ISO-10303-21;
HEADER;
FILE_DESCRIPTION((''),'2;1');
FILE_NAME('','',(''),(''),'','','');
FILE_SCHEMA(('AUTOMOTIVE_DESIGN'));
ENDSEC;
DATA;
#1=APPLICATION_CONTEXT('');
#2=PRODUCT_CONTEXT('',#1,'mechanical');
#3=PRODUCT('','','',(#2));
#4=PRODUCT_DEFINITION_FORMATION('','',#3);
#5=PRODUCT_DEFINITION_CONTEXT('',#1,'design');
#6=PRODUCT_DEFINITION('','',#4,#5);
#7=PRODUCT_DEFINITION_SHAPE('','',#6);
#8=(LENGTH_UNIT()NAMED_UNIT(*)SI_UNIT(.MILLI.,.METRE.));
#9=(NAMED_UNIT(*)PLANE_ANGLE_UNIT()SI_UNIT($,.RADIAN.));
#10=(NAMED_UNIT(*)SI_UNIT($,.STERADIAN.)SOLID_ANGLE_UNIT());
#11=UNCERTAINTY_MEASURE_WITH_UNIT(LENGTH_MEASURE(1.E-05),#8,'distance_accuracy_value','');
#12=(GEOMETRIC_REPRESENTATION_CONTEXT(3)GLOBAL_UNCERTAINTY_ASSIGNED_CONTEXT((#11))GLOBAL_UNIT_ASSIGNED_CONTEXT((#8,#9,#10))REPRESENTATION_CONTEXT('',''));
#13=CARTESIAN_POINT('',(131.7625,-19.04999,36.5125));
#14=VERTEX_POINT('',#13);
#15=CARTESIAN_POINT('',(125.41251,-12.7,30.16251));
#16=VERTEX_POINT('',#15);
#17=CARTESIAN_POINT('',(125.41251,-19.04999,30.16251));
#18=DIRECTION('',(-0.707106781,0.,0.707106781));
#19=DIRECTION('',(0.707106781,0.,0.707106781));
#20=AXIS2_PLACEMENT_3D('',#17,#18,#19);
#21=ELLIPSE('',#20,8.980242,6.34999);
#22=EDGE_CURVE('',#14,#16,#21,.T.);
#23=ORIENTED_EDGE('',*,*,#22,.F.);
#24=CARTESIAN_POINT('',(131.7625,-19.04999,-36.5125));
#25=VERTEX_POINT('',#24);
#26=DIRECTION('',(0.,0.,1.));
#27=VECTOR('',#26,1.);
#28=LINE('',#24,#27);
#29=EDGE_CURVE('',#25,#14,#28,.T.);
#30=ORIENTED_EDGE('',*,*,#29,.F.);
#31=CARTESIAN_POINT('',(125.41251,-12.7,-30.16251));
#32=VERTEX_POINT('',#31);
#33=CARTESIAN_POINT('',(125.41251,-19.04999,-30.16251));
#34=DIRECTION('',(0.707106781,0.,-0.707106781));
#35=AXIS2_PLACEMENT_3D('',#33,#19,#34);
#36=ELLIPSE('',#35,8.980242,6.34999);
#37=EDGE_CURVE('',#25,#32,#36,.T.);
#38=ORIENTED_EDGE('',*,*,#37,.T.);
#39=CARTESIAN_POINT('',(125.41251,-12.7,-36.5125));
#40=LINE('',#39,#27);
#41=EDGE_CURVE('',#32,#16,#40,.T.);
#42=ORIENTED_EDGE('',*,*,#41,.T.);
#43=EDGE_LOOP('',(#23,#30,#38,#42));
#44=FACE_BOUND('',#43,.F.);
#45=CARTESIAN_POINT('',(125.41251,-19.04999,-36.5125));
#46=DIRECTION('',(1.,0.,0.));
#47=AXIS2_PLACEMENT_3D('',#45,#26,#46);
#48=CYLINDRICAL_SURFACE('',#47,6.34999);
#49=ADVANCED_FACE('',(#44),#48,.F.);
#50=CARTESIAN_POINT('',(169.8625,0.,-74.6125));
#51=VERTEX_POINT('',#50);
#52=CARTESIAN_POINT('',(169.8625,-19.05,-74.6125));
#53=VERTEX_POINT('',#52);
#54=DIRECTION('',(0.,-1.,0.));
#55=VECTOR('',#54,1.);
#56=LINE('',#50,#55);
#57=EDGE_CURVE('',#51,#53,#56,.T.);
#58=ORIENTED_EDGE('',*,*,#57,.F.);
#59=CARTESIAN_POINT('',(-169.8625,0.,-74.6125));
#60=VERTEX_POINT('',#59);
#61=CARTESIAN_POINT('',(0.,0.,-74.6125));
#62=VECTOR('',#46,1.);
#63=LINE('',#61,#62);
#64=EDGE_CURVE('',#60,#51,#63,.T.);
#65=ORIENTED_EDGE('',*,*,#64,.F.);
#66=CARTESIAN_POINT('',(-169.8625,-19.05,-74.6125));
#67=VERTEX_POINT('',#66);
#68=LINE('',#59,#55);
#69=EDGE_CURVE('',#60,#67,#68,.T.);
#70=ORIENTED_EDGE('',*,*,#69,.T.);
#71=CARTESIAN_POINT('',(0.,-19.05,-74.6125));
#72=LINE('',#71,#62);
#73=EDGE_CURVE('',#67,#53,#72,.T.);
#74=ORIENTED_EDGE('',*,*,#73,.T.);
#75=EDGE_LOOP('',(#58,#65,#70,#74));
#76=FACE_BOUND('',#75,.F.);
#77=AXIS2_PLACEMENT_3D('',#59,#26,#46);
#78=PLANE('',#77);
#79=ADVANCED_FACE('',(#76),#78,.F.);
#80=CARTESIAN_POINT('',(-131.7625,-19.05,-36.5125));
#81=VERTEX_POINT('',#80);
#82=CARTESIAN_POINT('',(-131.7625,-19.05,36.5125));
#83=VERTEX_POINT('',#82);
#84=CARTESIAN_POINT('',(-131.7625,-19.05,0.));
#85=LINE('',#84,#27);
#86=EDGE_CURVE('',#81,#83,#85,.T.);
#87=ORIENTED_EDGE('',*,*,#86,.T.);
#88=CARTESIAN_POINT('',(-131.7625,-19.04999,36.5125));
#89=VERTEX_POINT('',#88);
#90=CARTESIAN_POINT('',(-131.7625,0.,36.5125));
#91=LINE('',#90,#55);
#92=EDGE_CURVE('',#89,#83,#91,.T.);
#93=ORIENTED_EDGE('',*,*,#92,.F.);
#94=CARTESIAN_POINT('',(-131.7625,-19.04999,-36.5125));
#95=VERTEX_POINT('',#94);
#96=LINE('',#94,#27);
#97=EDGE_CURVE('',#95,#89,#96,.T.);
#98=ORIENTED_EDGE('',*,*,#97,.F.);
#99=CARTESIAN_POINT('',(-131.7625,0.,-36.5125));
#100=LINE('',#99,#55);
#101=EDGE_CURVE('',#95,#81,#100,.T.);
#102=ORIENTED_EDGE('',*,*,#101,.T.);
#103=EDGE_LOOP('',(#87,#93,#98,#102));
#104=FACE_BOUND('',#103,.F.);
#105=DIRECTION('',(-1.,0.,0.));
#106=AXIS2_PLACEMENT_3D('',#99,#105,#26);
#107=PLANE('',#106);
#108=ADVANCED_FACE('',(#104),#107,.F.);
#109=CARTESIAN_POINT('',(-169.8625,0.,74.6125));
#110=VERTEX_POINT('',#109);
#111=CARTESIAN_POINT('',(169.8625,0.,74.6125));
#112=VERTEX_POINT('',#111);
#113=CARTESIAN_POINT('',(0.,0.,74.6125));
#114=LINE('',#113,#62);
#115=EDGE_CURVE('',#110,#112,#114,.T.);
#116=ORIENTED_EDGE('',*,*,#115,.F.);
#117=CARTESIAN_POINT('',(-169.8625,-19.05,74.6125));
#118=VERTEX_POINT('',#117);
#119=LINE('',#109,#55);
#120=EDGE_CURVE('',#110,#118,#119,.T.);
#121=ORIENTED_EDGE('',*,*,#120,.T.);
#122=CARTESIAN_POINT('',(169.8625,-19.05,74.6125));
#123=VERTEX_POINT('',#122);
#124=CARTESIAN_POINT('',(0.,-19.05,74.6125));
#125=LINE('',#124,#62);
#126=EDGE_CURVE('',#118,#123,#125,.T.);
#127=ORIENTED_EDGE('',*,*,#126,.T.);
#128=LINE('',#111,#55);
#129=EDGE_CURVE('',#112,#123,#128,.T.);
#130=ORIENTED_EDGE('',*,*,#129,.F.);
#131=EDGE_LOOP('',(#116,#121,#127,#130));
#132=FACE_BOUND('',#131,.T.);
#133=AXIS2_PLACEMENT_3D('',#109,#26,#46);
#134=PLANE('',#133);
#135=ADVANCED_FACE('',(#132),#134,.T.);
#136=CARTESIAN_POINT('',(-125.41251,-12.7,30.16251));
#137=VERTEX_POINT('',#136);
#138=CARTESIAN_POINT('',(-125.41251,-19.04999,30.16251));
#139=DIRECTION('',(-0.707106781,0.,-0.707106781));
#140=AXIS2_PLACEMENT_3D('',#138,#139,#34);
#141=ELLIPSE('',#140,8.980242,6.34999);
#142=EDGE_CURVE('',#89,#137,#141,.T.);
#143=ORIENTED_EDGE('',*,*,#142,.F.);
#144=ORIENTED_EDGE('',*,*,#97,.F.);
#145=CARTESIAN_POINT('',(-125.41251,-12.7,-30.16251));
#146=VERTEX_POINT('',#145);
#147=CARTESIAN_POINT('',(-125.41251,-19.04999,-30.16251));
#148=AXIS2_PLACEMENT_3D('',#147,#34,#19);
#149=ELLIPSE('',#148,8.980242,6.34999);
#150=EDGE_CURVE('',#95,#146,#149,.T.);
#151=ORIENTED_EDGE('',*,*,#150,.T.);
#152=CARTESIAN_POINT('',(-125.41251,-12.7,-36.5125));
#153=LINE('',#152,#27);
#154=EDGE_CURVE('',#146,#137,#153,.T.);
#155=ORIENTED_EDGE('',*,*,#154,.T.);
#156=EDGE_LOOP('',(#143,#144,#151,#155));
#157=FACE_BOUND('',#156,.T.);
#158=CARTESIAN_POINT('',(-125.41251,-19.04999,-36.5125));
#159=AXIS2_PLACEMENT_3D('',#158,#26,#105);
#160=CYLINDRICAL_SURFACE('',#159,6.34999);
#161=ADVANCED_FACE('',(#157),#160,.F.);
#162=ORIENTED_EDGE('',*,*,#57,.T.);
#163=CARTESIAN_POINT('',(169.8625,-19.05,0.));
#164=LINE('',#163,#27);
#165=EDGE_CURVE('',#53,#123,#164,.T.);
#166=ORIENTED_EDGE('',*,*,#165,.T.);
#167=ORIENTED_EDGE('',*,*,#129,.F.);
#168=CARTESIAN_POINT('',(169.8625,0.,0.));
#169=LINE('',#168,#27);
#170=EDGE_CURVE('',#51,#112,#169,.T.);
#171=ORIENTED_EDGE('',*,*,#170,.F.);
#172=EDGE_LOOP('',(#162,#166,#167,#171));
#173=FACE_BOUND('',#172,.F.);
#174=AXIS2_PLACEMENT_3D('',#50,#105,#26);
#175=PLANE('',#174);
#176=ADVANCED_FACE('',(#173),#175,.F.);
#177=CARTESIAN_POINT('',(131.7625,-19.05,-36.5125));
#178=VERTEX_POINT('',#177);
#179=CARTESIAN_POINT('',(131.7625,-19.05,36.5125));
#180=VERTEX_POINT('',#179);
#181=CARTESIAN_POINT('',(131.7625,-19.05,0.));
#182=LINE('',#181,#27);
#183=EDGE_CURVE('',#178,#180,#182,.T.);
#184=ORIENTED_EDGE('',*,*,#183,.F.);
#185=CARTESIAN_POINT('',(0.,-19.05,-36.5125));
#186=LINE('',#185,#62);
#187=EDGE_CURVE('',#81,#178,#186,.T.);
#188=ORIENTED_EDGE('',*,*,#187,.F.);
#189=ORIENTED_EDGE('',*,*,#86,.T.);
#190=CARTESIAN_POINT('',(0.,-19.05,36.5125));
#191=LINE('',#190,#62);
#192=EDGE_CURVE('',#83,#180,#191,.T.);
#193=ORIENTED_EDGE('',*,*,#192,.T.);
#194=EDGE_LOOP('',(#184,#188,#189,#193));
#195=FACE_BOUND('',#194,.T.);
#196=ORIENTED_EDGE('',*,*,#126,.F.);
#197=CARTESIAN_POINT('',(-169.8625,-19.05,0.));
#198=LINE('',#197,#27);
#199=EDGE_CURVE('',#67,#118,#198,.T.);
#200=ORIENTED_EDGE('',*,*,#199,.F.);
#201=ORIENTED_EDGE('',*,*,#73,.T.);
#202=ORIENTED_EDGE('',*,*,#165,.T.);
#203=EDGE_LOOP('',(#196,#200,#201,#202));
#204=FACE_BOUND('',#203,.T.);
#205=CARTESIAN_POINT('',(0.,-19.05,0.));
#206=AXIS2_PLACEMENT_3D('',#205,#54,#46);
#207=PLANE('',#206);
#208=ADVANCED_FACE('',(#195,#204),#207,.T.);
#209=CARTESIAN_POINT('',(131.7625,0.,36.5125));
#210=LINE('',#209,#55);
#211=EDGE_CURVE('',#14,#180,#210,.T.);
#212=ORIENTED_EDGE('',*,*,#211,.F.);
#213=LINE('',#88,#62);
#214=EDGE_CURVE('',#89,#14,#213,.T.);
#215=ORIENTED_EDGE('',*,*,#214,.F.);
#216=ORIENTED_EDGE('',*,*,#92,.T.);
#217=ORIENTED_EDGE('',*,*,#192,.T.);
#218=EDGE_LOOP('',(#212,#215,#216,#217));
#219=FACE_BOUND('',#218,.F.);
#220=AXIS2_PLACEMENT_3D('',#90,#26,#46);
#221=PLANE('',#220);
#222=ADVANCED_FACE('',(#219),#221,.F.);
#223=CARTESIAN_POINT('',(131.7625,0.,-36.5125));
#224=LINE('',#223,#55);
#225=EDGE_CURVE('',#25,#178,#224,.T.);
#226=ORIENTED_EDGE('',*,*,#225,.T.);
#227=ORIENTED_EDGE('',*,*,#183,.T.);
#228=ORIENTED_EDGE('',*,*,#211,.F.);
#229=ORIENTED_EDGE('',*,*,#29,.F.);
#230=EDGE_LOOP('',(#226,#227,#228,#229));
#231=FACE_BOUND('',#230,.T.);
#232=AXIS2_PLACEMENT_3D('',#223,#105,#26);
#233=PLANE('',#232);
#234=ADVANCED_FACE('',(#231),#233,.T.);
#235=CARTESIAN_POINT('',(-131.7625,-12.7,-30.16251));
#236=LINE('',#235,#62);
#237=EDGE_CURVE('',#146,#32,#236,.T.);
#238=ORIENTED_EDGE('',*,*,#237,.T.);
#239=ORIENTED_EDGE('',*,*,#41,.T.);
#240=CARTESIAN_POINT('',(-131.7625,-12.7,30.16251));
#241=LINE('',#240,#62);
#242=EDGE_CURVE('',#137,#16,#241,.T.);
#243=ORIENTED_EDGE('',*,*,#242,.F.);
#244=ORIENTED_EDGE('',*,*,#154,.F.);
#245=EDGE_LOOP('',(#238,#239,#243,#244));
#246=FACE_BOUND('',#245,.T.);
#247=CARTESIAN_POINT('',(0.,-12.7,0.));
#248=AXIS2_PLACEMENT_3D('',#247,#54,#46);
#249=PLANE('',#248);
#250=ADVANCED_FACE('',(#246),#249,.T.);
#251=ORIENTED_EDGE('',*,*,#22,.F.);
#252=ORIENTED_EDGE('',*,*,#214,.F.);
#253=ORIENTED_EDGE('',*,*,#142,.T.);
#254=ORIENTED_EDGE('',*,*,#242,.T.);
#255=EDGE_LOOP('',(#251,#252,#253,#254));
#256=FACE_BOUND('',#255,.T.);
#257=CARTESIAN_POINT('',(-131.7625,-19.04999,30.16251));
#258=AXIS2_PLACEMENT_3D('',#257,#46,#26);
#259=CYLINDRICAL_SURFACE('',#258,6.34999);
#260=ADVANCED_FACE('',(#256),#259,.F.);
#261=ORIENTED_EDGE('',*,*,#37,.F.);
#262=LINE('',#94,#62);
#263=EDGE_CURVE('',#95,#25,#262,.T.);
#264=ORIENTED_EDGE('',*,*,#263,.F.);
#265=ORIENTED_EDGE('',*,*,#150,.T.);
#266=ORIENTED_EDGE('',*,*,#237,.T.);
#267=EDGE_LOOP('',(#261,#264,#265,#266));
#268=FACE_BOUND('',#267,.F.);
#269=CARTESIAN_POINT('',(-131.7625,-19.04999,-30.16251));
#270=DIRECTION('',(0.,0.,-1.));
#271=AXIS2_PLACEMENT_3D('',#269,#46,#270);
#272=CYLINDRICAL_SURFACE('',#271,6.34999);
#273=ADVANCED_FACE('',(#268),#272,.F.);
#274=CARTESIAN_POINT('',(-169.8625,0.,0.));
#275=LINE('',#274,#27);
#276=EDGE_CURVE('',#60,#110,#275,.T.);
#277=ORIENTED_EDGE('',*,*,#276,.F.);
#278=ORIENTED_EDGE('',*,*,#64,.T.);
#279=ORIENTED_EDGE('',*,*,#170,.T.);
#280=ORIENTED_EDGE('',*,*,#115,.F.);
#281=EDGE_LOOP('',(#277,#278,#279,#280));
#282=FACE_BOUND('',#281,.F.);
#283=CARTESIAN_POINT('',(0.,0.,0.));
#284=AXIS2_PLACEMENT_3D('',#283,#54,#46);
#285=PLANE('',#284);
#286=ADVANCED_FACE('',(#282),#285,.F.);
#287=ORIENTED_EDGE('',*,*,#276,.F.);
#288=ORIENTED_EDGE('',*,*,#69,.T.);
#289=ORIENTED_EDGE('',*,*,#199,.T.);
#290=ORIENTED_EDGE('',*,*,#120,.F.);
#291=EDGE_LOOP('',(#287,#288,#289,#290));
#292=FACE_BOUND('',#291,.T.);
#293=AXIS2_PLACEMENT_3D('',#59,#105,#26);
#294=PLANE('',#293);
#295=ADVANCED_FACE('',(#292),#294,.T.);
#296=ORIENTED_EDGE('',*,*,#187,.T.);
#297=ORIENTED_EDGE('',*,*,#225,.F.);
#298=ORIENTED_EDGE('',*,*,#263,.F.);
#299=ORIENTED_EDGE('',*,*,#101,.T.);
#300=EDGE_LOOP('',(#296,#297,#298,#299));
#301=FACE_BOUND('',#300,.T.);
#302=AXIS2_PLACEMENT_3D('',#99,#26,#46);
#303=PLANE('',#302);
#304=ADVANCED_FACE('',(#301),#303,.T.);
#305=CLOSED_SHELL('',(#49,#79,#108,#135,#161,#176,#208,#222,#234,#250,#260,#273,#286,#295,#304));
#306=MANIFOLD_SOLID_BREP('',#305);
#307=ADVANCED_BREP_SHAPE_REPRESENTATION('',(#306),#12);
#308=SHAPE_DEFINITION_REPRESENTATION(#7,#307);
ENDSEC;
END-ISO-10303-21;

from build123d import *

# Parameters (mm, degrees)
F0_W     = 339.725
F0_H     = 149.225
F0_W_2   = 263.525
F0_H_2   = 73.025
F1_DEPTH = 19.05
F2_DEPTH = 12.7
F3_R     = 6.34999


# Not quite as in the source:
# - a fillet or chamfer is up to 0.001 mm smaller than in the source, because OpenCascade refuses the exact size


with BuildPart() as f1:
    # F0 (on Front) → F1 (new body)
    with BuildSketch(Plane.XZ):
        Rectangle(F0_W, F0_H)
        Rectangle(F0_W_2, F0_H_2, mode=Mode.SUBTRACT)
    extrude(amount=F1_DEPTH)

    # F0 (on Front) → F2 (join)
    with BuildSketch(Plane.XZ):
        Rectangle(F0_W_2, F0_H_2)
    extrude(amount=F2_DEPTH)

    # F3 (radius 6.35 in the source; OpenCascade refuses exactly that, so slightly less here)
    f3_edges = [f1.edges().sort_by_distance(p)[0] for p in [
        (0, -12.7, 36.5125),
        (-131.7625, -12.7, 0),
        (0, -12.7, -36.5125),
        (131.7625, -12.7, 0),
    ]]
    fillet(f3_edges, radius=F3_R)


solid = f1.part
